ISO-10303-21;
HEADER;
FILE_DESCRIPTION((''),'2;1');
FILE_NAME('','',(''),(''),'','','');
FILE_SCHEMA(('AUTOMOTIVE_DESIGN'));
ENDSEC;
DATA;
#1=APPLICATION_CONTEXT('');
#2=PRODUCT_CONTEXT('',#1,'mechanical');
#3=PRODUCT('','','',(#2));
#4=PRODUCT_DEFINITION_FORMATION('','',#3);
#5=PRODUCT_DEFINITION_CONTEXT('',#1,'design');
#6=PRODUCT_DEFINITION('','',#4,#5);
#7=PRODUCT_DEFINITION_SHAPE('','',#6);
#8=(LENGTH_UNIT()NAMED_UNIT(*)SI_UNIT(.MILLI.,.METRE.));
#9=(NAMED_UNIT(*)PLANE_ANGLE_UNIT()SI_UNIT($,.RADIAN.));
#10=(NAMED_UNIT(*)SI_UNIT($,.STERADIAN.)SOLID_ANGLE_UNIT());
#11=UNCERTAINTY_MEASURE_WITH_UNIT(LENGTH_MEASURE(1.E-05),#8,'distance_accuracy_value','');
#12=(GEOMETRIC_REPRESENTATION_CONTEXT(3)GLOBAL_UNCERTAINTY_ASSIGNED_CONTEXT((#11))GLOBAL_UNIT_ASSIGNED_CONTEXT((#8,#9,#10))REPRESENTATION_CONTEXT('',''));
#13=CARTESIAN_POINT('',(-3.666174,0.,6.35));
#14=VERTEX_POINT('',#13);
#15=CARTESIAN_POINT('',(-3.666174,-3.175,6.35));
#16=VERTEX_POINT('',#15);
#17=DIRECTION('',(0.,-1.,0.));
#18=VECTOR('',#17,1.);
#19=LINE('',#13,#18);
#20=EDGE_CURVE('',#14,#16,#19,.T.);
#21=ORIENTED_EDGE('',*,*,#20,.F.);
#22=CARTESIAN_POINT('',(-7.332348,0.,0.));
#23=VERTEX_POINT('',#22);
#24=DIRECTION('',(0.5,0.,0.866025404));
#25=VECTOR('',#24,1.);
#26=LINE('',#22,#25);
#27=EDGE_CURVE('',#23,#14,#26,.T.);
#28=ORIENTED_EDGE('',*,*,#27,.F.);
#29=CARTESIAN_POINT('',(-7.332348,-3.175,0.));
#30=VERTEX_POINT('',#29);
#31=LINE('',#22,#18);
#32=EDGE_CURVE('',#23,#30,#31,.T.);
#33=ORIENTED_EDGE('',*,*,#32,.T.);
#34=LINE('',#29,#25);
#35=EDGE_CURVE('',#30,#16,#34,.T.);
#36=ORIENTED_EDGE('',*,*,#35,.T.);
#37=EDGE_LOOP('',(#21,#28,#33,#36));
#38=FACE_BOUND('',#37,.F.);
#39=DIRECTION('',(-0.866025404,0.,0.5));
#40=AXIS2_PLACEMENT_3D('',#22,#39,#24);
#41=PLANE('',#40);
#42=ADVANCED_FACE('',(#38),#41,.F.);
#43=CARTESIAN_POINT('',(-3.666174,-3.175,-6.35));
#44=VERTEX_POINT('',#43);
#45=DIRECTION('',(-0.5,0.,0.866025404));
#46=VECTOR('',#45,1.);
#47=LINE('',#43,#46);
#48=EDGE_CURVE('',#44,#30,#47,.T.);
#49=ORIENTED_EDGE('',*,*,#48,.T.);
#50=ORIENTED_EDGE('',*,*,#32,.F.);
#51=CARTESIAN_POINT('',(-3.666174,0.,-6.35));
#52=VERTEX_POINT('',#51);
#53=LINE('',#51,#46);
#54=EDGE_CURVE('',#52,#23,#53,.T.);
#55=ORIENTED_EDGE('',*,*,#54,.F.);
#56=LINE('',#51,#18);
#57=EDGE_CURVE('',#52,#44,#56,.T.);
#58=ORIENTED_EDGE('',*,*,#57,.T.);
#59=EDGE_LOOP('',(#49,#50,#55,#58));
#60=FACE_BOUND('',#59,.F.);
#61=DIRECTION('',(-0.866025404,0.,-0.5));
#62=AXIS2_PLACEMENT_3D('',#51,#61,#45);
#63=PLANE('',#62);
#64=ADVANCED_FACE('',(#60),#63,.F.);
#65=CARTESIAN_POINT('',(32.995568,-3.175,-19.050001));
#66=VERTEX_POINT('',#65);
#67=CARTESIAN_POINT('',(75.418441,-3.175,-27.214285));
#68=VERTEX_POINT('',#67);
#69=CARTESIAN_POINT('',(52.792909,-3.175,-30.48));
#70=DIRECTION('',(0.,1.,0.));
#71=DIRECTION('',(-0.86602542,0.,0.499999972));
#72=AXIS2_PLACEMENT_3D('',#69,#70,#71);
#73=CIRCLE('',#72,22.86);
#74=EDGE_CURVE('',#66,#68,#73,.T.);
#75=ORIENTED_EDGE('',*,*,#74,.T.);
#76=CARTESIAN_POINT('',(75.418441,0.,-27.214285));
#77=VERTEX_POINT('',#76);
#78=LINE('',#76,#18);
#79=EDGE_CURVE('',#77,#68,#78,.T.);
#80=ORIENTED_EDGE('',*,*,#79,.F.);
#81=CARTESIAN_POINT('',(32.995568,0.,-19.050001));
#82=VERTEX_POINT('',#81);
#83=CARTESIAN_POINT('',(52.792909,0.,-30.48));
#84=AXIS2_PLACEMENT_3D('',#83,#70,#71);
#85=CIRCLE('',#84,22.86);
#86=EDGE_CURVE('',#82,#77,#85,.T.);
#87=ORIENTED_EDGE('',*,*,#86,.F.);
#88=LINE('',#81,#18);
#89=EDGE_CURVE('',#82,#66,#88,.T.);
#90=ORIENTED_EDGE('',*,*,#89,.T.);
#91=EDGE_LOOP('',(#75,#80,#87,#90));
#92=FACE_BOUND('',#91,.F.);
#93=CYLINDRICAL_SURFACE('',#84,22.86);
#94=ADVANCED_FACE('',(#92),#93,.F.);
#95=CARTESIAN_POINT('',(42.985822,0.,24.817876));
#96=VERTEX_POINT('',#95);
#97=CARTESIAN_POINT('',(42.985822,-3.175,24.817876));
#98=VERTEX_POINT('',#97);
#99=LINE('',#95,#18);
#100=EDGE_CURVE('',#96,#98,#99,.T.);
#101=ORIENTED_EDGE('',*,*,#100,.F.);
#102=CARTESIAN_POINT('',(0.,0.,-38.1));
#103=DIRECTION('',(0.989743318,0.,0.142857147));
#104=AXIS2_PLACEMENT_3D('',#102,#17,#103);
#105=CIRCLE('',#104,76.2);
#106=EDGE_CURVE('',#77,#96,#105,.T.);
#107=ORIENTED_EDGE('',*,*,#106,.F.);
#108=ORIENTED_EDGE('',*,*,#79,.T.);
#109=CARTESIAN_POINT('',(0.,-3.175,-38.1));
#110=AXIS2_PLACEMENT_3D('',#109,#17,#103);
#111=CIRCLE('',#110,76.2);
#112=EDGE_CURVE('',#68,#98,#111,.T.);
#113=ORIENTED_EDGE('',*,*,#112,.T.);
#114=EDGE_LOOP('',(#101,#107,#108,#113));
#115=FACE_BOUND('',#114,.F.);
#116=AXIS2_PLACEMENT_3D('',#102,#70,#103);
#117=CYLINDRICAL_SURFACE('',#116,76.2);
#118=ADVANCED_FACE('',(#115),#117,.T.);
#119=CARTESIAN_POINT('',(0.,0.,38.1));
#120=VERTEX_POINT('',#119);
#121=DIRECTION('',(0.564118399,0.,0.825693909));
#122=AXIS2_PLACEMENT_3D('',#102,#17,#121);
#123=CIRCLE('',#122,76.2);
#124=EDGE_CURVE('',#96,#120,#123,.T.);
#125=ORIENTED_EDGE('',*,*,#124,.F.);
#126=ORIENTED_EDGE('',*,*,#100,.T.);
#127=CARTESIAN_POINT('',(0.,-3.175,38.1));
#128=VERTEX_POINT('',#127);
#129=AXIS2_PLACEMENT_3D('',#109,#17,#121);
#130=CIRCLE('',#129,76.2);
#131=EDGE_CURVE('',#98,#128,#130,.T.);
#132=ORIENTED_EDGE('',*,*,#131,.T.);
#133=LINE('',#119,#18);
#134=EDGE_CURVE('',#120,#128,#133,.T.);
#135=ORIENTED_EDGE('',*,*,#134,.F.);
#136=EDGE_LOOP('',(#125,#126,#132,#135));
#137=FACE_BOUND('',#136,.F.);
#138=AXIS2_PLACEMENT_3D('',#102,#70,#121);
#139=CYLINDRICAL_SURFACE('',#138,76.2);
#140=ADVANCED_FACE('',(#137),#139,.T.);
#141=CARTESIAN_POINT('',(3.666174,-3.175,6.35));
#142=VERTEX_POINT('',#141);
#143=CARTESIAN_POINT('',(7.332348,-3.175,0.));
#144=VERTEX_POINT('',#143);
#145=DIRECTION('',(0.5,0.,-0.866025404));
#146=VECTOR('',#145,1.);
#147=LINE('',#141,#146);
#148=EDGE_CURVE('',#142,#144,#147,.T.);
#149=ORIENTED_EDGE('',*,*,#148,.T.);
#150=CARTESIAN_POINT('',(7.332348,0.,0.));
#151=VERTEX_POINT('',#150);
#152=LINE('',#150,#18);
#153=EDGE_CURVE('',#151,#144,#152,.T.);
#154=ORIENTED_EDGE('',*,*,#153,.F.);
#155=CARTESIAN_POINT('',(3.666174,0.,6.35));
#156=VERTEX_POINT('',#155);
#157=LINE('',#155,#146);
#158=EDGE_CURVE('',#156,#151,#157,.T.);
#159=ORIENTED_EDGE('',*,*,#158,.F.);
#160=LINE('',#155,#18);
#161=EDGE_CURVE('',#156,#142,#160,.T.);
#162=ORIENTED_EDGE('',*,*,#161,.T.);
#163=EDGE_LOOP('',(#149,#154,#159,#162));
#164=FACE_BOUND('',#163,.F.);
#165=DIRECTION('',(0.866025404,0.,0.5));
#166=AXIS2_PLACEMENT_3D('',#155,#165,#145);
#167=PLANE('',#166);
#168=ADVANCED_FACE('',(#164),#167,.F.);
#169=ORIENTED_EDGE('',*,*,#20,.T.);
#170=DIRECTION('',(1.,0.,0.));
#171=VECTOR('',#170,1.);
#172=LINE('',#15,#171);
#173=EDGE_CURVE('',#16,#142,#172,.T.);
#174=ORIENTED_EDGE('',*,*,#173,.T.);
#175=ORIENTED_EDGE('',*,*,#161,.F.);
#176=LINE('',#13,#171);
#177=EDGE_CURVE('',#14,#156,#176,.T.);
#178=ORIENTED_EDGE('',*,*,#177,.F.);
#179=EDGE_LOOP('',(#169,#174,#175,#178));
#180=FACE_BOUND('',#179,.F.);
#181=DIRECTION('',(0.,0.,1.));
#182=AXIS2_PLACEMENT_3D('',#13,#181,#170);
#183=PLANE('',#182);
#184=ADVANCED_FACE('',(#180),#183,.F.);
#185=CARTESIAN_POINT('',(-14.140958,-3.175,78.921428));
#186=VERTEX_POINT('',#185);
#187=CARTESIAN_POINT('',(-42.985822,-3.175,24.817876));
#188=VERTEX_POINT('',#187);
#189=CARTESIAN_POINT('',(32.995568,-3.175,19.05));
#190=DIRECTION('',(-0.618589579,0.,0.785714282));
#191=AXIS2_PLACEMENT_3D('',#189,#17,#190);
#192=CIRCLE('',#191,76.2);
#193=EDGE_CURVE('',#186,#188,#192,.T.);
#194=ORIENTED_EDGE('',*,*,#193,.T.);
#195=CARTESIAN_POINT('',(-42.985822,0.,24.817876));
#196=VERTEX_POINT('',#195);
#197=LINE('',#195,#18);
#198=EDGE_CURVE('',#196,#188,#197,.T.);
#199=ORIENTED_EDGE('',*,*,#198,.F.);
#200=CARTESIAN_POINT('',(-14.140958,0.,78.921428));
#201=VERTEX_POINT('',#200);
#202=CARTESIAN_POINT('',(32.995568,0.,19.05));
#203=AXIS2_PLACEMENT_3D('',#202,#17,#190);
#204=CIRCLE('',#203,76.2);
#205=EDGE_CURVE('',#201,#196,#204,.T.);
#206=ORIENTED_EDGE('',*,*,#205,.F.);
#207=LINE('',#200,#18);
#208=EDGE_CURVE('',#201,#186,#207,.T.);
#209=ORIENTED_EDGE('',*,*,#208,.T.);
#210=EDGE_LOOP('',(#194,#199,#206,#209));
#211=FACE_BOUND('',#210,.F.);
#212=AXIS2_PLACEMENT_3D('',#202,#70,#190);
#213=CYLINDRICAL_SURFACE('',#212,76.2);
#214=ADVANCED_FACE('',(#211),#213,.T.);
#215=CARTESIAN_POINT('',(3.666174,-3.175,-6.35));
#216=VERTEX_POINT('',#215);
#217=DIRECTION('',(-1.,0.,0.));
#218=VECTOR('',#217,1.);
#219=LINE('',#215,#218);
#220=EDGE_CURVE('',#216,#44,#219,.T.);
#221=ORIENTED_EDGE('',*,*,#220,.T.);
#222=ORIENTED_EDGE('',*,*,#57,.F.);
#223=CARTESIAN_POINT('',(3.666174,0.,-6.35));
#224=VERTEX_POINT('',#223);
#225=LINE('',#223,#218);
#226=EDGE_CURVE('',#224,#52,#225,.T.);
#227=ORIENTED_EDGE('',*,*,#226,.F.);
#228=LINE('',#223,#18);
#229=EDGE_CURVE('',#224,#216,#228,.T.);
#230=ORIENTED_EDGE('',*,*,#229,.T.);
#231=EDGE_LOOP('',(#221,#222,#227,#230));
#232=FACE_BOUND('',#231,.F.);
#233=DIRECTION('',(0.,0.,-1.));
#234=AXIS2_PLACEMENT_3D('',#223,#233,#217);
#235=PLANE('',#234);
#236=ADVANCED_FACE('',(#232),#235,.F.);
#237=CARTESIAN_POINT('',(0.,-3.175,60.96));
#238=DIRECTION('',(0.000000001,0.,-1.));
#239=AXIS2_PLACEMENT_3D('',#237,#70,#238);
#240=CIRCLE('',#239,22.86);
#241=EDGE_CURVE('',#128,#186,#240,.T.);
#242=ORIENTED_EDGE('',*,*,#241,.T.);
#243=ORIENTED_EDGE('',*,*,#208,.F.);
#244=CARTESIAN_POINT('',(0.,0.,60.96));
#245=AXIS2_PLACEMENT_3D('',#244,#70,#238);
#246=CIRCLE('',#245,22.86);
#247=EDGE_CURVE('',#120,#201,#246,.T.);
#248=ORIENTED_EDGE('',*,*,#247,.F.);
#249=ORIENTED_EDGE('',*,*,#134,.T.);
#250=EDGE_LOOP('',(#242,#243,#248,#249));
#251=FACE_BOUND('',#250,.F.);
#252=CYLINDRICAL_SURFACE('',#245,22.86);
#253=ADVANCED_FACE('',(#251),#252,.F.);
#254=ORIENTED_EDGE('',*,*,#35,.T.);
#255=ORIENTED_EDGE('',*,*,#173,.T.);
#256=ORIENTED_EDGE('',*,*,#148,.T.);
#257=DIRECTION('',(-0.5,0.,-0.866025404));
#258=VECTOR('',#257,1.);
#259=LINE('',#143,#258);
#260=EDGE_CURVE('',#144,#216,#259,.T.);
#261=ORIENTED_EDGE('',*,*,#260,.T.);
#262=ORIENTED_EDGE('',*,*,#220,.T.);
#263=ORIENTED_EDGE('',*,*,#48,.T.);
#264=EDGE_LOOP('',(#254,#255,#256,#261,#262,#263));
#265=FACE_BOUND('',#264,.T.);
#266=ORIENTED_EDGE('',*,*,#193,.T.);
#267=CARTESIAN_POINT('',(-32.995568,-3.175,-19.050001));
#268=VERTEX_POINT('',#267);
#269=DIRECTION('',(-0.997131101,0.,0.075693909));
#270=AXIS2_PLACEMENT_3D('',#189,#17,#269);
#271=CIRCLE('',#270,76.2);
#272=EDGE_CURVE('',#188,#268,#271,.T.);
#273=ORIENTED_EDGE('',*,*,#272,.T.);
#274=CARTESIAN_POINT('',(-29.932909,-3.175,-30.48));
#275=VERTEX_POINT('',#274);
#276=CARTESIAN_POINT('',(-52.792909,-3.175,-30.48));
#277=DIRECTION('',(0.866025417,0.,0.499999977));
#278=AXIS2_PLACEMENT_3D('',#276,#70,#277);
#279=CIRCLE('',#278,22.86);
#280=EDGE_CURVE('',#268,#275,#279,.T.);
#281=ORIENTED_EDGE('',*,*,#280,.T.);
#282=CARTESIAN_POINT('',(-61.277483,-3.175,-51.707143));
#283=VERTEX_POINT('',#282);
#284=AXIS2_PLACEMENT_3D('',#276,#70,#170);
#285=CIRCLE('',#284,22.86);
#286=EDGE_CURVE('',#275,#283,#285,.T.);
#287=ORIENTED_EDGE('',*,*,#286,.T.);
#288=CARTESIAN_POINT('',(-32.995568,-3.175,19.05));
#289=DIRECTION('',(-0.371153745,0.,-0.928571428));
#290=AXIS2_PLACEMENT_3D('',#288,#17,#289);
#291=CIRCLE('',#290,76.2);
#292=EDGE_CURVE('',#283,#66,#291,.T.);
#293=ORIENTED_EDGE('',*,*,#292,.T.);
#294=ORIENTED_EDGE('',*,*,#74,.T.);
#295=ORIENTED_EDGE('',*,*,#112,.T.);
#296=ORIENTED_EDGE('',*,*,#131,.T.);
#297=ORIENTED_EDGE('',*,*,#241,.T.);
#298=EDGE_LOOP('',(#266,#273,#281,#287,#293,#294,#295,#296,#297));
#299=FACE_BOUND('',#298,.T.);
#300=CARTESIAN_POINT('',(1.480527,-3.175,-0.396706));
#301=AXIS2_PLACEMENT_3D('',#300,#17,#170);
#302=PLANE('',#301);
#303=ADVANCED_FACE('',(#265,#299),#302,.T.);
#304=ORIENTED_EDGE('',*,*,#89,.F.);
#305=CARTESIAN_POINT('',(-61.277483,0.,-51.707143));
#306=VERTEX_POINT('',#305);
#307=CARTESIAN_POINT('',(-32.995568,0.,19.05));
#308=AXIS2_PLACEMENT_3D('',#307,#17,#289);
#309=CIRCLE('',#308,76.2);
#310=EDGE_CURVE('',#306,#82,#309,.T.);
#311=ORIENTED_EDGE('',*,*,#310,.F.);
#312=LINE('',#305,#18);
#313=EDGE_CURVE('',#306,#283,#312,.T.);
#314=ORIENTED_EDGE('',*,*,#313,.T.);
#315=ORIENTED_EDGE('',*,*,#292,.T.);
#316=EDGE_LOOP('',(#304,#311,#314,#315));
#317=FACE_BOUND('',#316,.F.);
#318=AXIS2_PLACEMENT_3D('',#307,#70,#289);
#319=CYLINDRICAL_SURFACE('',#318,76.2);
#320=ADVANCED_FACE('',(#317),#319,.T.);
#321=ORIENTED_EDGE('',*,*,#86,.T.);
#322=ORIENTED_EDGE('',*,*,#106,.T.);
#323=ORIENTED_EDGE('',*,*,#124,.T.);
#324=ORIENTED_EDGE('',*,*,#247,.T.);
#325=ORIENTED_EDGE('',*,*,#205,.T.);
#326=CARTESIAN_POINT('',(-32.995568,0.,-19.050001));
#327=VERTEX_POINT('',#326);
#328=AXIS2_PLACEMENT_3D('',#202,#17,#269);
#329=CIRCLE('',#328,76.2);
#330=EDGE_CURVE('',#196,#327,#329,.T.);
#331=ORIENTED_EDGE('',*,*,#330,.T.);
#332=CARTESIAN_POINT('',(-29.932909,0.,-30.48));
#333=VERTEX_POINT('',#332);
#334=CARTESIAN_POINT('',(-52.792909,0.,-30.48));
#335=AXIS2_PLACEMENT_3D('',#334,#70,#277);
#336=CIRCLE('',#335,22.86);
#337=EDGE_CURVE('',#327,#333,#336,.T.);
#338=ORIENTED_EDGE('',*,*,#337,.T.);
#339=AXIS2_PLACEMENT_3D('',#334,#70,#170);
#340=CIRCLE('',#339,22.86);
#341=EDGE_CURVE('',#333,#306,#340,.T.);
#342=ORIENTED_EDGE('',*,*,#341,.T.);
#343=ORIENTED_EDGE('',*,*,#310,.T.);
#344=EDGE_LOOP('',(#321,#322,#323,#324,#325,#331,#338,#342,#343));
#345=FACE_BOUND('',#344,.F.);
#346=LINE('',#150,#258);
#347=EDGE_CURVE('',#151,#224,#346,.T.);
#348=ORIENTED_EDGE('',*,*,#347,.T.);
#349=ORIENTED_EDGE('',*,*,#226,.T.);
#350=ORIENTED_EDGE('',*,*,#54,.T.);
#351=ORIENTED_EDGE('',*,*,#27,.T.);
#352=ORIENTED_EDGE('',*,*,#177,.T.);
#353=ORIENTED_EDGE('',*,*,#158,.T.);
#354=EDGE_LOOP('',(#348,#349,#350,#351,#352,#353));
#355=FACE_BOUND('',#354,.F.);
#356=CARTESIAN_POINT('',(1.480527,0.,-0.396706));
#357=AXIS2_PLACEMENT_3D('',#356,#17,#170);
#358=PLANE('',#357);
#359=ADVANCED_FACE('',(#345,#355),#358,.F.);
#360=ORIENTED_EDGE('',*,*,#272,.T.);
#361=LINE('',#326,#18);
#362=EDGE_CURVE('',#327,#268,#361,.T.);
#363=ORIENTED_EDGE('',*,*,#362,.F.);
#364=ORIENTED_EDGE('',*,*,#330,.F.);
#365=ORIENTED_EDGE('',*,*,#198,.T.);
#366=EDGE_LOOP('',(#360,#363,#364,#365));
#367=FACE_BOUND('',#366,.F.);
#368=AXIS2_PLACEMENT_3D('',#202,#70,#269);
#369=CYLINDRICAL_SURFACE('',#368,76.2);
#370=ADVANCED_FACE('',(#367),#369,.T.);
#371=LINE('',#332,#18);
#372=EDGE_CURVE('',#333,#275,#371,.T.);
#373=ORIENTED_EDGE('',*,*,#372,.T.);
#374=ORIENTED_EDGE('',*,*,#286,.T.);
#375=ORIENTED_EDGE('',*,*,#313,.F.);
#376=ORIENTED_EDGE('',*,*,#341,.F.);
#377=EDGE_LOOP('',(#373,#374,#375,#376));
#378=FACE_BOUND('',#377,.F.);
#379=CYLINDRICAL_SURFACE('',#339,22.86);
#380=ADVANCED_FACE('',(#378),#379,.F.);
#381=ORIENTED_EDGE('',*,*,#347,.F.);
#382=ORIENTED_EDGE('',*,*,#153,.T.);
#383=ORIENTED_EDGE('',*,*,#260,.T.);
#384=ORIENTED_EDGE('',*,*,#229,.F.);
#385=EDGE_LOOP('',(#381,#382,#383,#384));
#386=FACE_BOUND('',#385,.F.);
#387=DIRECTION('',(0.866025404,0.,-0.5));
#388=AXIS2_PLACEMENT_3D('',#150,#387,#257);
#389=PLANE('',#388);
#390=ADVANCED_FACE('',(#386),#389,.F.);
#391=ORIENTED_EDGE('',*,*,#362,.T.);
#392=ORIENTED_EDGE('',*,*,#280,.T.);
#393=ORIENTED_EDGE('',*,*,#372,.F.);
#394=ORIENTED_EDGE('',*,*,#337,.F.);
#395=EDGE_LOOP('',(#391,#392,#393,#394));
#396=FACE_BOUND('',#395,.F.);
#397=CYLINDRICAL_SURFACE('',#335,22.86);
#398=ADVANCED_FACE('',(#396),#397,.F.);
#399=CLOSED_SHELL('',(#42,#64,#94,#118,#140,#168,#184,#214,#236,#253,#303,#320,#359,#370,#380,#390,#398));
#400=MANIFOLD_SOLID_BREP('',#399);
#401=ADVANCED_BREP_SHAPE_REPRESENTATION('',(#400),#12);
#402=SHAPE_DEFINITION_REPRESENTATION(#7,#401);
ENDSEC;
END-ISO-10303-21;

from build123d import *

# Parameters (mm, degrees)
F1_DEPTH = 3.175


with BuildPart() as f1:
    # F0 (on Front) → F1 (new body)
    with BuildSketch(Plane.XZ):
        with BuildLine():
            ThreePointArc((32.9955675162, -19.0500006373), (36.8017738864, -9.8610059738), (38.1, 0))
            ThreePointArc((38.1, 0), (26.9407683703, 26.9407683561), (2.01e-08, 38.1))
            ThreePointArc((2.01e-08, 38.1), (-32.9955680289, 19.0499997494), (-32.9955675847, -19.0500005187))
            ThreePointArc((-32.9955675847, -19.0500005187), (-6.85e-08, -38.1), (32.9955675162, -19.0500006373))
        make_face()
        Polygon((3.6661742094, 6.35), (7.3323484187, 0), (3.6661742094, -6.35), (-3.6661742094, -6.35), (-7.3323484187, 0), (-3.6661742094, 6.35), align=None, mode=Mode.SUBTRACT)
        with BuildLine():
            ThreePointArc((2.01e-08, 38.1), (26.9407683703, 26.9407683561), (38.1, 0))
            ThreePointArc((38.1, 0), (36.8017738864, -9.8610059738), (32.9955675162, -19.0500006373))
            ThreePointArc((32.9955675162, -19.0500006373), (40.6079799838, -0.6720115922), (43.2044321158, 19.05))
            ThreePointArc((43.2044321158, 19.05), (43.1497599719, 21.9360086092), (42.9858219927, 24.8178758988))
            ThreePointArc((42.9858219927, 24.8178758988), (22.4955313049, 34.7037847321), (2.01e-08, 38.1))
        make_face()
        with BuildLine():
            ThreePointArc((-32.9955675847, -19.0500005187), (-32.9955680289, 19.0499997494), (2.01e-08, 38.1))
            ThreePointArc((2.01e-08, 38.1), (-22.4955312856, 34.703784738), (-42.9858219927, 24.8178758988))
            ThreePointArc((-42.9858219927, 24.8178758988), (-41.3021247691, 2.1298089138), (-32.9955675847, -19.0500005187))
        make_face()
        with BuildLine():
            ThreePointArc((-42.9858219927, 24.8178758988), (-22.4955312856, 34.703784738), (2.01e-08, 38.1))
            ThreePointArc((2.01e-08, 38.1), (-21.6006695494, 53.4773083041), (-14.1409580475, 78.92142827))
            ThreePointArc((-14.1409580475, 78.92142827), (-34.2450737922, 54.8987950557), (-42.9858219927, 24.8178758988))
        make_face()
        with BuildLine():
            ThreePointArc((0, -49.6357517976), (18.8065932705, -36.833594191), (32.9955675162, -19.0500006373))
            ThreePointArc((32.9955675162, -19.0500006373), (-6.85e-08, -38.1), (-32.9955675847, -19.0500005187))
            ThreePointArc((-32.9955675847, -19.0500005187), (-18.8065933208, -36.8335941444), (0, -49.6357517976))
        make_face()
        with BuildLine():
            ThreePointArc((43.2044321158, 19.05), (40.6079799838, -0.6720115922), (32.9955675162, -19.0500006373))
            ThreePointArc((32.9955675162, -19.0500006373), (57.1130420252, -8.0319255321), (75.4184408331, -27.2142854025))
            ThreePointArc((75.4184408331, -27.2142854025), (64.6662880971, 2.2077062576), (42.9858219927, 24.8178758988))
            ThreePointArc((42.9858219927, 24.8178758988), (43.1497599719, 21.9360086092), (43.2044321158, 19.05))
        make_face()
        with BuildLine():
            ThreePointArc((0, -49.6357517976), (-18.8065933208, -36.8335941444), (-32.9955675847, -19.0500005187))
            ThreePointArc((-32.9955675847, -19.0500005187), (-30.7118441482, -24.5633969182), (-29.9329086147, -30.48))
            ThreePointArc((-29.9329086147, -30.48), (-39.9745190131, -49.4079816151), (-61.2774832447, -51.7071428447))
            ThreePointArc((-61.2774832447, -51.7071428447), (-30.4212145195, -57.1065013952), (0, -49.6357517976))
        make_face()
    extrude(amount=F1_DEPTH)


solid = f1.part
